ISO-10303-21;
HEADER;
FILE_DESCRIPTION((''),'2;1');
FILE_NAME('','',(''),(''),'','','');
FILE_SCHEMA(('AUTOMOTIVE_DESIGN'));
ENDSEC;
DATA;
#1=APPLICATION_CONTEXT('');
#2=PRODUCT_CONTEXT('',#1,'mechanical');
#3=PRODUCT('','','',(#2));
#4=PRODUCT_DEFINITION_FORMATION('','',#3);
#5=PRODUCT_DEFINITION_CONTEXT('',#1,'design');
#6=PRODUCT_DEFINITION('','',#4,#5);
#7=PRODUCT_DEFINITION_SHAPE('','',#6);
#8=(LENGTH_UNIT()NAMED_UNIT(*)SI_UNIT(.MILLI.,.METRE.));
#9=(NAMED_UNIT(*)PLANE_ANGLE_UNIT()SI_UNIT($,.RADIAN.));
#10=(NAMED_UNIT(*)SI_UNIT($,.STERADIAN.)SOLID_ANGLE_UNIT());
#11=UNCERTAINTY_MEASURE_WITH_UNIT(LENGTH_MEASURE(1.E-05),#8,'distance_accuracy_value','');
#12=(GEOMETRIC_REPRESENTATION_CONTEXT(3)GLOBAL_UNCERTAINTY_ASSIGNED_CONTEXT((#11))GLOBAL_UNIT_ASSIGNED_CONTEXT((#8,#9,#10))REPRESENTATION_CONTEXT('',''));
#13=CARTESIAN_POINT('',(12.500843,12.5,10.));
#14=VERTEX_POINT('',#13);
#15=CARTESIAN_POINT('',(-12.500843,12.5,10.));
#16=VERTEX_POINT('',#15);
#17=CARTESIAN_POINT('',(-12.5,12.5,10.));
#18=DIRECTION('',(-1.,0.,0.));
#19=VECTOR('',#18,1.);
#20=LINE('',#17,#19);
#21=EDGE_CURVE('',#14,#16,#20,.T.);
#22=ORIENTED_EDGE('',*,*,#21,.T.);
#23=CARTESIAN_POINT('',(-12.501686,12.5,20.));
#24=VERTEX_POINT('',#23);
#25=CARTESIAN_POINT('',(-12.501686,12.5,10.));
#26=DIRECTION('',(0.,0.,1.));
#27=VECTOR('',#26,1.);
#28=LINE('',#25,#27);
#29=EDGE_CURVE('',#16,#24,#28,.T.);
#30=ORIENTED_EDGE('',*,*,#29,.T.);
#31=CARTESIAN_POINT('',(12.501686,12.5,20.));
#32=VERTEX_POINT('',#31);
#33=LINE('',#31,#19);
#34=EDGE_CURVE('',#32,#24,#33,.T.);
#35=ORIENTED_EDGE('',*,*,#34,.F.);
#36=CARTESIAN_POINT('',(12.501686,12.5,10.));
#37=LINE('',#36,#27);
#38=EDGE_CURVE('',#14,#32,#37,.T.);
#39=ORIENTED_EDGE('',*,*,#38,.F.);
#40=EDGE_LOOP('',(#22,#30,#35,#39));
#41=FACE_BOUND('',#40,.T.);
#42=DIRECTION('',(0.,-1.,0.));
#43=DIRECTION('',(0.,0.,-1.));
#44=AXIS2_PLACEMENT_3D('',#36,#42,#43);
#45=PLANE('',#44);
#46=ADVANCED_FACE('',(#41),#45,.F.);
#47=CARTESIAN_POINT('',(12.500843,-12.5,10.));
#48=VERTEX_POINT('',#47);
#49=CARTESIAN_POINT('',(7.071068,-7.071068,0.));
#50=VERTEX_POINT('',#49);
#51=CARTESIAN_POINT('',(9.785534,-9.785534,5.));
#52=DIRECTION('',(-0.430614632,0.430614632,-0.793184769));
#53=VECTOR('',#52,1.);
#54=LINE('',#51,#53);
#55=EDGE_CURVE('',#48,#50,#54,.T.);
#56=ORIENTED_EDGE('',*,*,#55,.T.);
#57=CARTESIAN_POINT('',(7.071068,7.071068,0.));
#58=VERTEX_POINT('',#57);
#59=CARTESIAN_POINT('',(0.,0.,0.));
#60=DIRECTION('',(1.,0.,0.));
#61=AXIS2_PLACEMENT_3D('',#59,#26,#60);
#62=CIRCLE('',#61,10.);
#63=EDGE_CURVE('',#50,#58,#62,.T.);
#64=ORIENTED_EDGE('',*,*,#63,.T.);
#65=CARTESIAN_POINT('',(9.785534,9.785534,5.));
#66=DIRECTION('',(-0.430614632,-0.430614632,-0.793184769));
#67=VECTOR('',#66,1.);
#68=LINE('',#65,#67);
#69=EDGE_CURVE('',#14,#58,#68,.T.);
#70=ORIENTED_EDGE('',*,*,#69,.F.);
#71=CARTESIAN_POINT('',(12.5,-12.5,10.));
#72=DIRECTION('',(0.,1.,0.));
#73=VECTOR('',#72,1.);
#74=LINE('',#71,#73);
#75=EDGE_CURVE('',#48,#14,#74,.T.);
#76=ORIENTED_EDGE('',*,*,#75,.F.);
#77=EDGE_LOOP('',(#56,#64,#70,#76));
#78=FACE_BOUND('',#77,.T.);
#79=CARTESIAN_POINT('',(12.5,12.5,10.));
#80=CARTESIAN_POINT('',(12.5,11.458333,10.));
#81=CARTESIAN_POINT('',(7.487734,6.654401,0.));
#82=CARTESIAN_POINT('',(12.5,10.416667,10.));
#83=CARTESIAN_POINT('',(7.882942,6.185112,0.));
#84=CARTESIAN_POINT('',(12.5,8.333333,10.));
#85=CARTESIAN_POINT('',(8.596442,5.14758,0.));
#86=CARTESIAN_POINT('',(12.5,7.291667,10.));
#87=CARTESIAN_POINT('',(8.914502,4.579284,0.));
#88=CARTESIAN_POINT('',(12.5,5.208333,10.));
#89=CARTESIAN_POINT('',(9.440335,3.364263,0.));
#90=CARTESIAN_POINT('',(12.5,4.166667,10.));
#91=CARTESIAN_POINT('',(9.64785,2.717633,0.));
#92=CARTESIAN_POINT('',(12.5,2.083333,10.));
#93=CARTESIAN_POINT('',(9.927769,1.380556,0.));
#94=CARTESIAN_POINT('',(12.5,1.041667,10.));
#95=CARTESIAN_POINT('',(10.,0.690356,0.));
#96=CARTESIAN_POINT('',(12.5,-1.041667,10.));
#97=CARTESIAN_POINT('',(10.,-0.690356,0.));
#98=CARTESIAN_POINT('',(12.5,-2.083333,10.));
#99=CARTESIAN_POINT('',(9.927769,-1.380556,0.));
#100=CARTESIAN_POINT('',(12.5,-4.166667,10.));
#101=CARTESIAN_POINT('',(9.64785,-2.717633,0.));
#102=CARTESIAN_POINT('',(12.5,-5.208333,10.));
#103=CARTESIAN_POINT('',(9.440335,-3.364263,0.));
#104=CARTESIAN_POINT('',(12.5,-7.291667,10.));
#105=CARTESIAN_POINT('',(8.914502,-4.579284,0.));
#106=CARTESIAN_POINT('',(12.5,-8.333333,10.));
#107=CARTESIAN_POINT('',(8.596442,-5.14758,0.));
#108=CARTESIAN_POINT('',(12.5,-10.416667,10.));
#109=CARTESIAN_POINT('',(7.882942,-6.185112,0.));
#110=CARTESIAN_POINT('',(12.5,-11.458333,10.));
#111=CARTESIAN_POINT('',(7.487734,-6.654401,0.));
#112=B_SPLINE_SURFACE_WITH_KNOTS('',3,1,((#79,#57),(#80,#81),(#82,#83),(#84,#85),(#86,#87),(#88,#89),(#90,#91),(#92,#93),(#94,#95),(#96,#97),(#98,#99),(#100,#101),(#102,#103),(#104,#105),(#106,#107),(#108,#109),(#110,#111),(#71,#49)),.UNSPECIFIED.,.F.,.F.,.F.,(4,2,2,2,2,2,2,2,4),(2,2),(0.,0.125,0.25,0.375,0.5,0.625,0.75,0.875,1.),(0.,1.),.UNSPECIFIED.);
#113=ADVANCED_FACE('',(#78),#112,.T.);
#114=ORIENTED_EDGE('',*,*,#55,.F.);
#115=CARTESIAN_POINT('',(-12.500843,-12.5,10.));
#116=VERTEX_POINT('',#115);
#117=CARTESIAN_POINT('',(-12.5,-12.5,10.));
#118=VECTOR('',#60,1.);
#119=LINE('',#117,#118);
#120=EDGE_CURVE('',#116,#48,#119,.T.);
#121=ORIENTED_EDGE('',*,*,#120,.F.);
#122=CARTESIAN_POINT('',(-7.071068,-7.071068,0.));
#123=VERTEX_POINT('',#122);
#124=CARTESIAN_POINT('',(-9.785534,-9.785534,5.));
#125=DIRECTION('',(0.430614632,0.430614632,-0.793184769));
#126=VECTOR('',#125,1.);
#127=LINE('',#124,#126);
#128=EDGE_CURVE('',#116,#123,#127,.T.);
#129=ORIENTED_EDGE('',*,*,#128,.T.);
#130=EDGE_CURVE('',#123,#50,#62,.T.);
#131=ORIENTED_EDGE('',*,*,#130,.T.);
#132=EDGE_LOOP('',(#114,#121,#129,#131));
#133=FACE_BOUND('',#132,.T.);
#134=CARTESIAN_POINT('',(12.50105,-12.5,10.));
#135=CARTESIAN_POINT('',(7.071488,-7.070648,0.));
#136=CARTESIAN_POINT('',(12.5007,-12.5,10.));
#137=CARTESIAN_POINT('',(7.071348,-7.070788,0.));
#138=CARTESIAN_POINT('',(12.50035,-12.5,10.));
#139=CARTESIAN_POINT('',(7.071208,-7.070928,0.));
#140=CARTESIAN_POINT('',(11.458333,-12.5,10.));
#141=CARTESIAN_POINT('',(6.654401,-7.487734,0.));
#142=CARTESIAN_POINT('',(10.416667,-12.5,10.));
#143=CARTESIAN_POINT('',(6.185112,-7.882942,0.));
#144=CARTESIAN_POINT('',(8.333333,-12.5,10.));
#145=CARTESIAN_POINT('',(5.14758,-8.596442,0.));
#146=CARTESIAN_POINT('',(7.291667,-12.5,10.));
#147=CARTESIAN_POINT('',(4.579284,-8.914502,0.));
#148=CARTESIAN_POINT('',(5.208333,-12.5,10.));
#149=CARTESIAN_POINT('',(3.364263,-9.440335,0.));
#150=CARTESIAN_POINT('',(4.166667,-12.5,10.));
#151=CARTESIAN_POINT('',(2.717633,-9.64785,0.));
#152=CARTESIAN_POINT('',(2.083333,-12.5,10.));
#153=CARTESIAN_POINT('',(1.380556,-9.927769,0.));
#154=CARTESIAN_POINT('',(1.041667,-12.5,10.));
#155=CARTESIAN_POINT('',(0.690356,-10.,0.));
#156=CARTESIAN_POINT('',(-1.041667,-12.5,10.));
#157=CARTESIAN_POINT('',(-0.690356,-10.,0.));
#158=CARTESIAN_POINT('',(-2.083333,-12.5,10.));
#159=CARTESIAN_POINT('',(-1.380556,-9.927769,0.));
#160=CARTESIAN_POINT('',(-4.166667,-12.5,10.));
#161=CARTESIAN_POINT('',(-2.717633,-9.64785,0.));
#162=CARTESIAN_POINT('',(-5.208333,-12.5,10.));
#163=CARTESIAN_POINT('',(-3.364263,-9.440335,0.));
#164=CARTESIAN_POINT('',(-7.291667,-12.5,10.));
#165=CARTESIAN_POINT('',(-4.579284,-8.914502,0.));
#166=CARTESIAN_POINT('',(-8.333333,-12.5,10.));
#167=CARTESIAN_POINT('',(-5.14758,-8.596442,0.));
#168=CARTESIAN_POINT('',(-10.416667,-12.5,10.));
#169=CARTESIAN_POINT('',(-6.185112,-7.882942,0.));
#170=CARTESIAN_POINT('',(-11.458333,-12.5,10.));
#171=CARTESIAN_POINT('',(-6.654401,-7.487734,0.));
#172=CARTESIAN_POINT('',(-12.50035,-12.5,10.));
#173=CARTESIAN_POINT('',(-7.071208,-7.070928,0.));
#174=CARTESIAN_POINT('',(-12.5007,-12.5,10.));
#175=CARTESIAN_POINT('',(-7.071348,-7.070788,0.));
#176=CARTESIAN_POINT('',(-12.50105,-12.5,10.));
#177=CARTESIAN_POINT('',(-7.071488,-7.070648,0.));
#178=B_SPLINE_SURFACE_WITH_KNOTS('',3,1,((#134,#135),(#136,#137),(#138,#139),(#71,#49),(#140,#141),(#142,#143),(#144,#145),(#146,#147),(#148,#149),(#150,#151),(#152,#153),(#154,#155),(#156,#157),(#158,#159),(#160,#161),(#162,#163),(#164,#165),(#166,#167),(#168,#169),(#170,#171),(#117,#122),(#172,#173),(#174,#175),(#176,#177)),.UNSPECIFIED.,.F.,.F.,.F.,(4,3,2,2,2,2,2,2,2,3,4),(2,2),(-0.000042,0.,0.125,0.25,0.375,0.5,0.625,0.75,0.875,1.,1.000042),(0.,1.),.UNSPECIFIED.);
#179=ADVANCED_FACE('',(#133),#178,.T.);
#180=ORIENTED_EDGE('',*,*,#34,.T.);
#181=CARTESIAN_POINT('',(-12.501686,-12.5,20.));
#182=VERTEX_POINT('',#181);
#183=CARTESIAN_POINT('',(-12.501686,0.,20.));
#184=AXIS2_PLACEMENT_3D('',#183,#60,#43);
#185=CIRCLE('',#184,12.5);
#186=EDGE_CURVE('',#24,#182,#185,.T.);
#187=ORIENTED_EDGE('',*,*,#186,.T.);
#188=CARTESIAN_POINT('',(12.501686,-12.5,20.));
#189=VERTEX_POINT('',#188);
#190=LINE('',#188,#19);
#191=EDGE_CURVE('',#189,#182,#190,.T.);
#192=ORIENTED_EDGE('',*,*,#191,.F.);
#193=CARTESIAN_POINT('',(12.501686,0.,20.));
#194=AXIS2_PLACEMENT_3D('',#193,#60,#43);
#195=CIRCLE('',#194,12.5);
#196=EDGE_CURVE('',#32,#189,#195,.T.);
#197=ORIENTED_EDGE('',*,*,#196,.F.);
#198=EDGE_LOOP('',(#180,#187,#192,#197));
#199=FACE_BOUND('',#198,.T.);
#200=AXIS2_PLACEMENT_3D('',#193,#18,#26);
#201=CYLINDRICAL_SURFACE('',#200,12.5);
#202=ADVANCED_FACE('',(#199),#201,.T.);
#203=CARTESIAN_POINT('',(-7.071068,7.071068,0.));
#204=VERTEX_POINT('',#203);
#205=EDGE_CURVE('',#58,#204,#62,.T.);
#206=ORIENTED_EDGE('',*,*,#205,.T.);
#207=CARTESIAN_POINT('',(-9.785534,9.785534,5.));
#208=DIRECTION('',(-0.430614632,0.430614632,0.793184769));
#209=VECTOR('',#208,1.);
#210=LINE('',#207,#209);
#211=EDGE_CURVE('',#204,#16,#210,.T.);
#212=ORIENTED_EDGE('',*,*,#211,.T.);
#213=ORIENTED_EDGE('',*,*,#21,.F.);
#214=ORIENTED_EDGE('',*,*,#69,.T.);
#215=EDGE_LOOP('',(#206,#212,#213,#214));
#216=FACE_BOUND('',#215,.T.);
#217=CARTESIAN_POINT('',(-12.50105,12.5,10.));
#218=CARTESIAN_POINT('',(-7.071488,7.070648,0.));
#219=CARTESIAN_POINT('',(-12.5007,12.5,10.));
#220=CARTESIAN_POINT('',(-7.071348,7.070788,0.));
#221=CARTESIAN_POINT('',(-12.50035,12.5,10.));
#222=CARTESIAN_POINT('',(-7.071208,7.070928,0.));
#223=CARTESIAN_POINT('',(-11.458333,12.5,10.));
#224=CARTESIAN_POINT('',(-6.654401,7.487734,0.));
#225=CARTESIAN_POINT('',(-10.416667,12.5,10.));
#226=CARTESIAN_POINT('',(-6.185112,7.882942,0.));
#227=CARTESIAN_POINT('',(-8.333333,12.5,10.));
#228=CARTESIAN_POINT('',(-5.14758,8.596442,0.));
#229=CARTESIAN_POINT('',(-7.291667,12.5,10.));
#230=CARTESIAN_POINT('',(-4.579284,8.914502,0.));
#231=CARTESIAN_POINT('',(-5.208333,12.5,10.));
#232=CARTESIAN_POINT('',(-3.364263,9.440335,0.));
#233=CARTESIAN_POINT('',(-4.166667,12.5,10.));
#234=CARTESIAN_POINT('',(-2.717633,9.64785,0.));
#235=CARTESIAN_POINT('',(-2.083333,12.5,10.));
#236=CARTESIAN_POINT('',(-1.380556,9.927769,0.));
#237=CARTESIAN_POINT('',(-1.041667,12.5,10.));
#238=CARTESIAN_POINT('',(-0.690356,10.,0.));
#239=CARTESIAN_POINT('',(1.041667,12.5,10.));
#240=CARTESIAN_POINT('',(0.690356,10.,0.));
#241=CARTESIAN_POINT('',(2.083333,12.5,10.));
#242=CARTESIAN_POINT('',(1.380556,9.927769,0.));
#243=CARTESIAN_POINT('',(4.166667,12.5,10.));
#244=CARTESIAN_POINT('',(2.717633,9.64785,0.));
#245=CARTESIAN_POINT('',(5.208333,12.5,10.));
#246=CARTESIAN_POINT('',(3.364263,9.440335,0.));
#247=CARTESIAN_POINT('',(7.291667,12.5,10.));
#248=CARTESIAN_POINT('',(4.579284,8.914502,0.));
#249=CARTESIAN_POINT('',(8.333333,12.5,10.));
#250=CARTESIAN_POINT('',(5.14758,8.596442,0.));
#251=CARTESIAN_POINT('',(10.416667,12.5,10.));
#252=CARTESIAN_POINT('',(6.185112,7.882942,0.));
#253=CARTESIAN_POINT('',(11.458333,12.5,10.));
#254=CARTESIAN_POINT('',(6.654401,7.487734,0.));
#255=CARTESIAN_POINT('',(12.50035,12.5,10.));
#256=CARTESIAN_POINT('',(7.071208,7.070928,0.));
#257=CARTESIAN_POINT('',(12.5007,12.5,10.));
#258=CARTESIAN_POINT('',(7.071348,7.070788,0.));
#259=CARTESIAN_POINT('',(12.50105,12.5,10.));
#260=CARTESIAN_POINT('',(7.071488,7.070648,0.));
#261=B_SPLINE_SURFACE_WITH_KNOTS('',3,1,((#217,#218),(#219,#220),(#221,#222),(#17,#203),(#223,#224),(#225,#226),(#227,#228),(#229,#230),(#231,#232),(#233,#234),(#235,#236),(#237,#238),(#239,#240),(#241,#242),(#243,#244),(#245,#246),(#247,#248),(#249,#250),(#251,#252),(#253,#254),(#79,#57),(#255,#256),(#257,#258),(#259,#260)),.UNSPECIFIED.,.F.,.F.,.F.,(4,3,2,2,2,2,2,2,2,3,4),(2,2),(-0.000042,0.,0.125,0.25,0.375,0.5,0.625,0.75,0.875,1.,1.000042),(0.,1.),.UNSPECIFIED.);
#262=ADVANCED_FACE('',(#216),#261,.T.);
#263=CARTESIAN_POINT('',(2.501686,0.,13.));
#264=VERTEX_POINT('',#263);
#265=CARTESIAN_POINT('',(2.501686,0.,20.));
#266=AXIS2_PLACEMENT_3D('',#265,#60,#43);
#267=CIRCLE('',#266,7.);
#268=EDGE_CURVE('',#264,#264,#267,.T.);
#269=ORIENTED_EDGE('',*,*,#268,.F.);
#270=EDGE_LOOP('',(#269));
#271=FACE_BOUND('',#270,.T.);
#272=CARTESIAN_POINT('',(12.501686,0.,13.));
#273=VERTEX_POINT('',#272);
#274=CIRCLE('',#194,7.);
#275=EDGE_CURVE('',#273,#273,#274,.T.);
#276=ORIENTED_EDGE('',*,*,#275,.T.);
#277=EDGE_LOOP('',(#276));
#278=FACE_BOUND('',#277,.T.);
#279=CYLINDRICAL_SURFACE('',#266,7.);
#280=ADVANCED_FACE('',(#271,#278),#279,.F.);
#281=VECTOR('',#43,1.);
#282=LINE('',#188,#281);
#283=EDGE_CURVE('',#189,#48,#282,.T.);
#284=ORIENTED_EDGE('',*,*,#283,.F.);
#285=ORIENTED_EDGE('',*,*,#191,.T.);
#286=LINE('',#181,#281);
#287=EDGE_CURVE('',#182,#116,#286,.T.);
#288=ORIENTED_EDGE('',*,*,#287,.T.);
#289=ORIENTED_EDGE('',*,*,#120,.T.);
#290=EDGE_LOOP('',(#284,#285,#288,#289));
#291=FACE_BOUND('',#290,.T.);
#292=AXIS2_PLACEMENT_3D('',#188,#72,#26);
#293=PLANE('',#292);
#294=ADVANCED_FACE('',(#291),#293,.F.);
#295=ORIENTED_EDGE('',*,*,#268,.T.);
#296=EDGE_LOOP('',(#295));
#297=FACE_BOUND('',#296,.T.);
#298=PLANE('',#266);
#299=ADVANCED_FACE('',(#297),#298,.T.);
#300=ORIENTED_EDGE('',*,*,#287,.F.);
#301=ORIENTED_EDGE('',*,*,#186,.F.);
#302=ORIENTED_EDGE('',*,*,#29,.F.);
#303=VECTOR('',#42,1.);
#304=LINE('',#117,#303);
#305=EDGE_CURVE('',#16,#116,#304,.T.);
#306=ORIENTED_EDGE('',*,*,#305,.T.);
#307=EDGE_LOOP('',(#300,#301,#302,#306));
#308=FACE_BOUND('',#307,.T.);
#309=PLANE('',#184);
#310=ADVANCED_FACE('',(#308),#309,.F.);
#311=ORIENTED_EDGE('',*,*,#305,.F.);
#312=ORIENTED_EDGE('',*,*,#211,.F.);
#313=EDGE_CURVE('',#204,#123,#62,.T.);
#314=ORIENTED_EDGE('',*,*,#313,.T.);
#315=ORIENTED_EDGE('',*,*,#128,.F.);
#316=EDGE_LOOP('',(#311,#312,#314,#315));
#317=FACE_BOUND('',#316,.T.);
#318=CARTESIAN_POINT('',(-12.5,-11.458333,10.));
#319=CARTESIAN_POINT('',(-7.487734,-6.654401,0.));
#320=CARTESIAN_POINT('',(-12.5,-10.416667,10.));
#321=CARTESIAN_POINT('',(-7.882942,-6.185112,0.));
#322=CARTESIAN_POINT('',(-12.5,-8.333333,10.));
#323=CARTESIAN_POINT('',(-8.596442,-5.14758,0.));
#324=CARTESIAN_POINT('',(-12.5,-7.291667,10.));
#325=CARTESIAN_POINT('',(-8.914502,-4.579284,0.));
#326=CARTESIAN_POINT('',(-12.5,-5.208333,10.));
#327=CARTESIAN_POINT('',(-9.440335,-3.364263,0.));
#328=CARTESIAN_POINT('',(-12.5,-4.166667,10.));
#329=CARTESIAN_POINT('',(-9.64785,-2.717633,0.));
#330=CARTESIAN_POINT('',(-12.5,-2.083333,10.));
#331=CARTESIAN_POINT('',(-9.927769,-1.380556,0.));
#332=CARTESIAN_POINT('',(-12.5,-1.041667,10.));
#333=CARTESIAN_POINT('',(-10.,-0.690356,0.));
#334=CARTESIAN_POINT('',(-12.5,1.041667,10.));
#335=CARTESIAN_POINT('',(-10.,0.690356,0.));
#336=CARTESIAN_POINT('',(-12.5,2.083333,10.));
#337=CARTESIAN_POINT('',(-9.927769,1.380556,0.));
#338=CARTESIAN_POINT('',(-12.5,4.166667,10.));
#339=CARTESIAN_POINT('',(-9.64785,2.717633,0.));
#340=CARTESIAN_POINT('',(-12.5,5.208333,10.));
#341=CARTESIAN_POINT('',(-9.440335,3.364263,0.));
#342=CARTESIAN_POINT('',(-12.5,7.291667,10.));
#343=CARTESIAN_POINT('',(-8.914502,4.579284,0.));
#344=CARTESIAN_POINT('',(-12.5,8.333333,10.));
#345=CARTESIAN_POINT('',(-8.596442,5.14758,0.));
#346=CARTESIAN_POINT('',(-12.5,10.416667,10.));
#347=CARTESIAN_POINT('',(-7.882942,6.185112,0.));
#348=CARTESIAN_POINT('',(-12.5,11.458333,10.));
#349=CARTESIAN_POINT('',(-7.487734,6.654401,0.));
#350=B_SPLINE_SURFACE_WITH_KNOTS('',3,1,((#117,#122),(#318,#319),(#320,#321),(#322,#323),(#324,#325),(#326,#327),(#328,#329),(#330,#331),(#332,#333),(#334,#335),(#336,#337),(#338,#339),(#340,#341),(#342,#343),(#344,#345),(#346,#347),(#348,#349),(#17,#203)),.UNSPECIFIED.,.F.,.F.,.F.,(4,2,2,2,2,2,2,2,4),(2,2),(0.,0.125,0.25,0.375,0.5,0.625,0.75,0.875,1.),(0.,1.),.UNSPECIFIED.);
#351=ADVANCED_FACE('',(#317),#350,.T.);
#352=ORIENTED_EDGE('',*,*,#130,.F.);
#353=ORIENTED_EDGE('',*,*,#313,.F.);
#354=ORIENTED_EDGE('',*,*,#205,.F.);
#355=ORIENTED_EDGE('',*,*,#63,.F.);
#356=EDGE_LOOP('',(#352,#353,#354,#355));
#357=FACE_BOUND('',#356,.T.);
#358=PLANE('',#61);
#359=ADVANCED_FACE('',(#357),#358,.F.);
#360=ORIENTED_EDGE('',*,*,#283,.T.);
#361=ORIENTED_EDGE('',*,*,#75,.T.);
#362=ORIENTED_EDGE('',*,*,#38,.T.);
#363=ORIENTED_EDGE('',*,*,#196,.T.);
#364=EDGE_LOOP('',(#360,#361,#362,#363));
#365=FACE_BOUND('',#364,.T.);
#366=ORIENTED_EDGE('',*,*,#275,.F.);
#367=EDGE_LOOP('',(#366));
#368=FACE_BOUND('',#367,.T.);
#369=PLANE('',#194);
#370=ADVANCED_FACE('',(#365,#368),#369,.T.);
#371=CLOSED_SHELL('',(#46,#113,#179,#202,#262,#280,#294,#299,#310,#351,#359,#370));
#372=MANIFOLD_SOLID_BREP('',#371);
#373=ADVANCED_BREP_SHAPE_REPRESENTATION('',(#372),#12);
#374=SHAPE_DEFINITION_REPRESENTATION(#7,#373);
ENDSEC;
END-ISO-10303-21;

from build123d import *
from OCP.BRepAlgoAPI import BRepAlgoAPI_Cut
from OCP.TopTools import TopTools_ListOfShape

# Parameters (mm, degrees)
BOSS_EXTRUDE1_START = -12.501686
BOSS_EXTRUDE1_DEPTH = 25.003372
SKETCH4_R           = 7
CUT_EXTRUDE1_DEPTH  = 10


with BuildPart() as part:
    # Sketch2 → Loft1 section 0
    with BuildSketch(Plane.XY.offset(10)):
        with BuildLine():
            Line((-12.5, -12.5), (12.5, -12.5))
            Line((12.5, -12.5), (12.5, 12.5))
            Line((12.5, 12.5), (-12.5, 12.5))
            Line((-12.5, 12.5), (-12.5, -12.5))
        make_face()
    # Sketch1 for Loft1 → Loft1 section 1
    with BuildSketch(Plane.XY):
        with BuildLine():
            # circular arc as an exact rational Bezier (weights 1, cos(half-angle), 1)
            Bezier((-7.071067812, -7.071067812), (0, -14.142135623), (7.071067812, -7.071067812), weights=[1, 0.707106781, 1])
            Bezier((7.071067812, -7.071067812), (14.142135623, 0), (7.071067812, 7.071067812), weights=[1, 0.707106781, 1])
            Bezier((7.071067812, 7.071067812), (0, 14.142135623), (-7.071067812, 7.071067812), weights=[1, 0.707106781, 1])
            Bezier((-7.071067812, 7.071067812), (-14.142135623, 0), (-7.071067812, -7.071067812), weights=[1, 0.707106781, 1])
        make_face()
    loft()

    # Sketch3 → Boss-Extrude1 (add)
    with BuildSketch(Plane(origin=(0, 0, 0), x_dir=(0, 0, -1), z_dir=(1, 0, 0)).offset(BOSS_EXTRUDE1_START)):
        with BuildLine():
            Line((-10, 12.5), (-20, 12.5))
            ThreePointArc((-20, 12.5), (-32.5, 0), (-20, -12.5))
            Line((-20, -12.5), (-10, -12.5))
            Line((-10, -12.5), (-10, 12.5))
        make_face()
    extrude(amount=BOSS_EXTRUDE1_DEPTH)


with BuildPart() as cut_extrude1_tool:
    # Sketch4 → Cut-Extrude1 (new body)
    with BuildSketch(Plane(origin=(12.501685601, 0, 0), x_dir=(0, 0, -1), z_dir=(1, 0, 0))):
        with Locations((-20, 0)):
            Circle(SKETCH4_R)
    extrude(amount=-CUT_EXTRUDE1_DEPTH)


with BuildPart() as part_1:
    add(part.part)

    # Cut-Extrude1: cut by cut_extrude1_tool, with a tolerance
    cut_extrude1_stock = TopTools_ListOfShape()
    cut_extrude1_stock.Append(part_1.part.wrapped)
    cut_extrude1_tools = TopTools_ListOfShape()
    cut_extrude1_tools.Append(cut_extrude1_tool.part.wrapped)
    cut_extrude1_cut = BRepAlgoAPI_Cut()
    cut_extrude1_cut.SetArguments(cut_extrude1_stock)
    cut_extrude1_cut.SetTools(cut_extrude1_tools)
    cut_extrude1_cut.SetFuzzyValue(0.00001)
    cut_extrude1_cut.Build()
    add(Compound.cast(cut_extrude1_cut.Shape()).solids(), mode=Mode.REPLACE)


solid = part_1.part
